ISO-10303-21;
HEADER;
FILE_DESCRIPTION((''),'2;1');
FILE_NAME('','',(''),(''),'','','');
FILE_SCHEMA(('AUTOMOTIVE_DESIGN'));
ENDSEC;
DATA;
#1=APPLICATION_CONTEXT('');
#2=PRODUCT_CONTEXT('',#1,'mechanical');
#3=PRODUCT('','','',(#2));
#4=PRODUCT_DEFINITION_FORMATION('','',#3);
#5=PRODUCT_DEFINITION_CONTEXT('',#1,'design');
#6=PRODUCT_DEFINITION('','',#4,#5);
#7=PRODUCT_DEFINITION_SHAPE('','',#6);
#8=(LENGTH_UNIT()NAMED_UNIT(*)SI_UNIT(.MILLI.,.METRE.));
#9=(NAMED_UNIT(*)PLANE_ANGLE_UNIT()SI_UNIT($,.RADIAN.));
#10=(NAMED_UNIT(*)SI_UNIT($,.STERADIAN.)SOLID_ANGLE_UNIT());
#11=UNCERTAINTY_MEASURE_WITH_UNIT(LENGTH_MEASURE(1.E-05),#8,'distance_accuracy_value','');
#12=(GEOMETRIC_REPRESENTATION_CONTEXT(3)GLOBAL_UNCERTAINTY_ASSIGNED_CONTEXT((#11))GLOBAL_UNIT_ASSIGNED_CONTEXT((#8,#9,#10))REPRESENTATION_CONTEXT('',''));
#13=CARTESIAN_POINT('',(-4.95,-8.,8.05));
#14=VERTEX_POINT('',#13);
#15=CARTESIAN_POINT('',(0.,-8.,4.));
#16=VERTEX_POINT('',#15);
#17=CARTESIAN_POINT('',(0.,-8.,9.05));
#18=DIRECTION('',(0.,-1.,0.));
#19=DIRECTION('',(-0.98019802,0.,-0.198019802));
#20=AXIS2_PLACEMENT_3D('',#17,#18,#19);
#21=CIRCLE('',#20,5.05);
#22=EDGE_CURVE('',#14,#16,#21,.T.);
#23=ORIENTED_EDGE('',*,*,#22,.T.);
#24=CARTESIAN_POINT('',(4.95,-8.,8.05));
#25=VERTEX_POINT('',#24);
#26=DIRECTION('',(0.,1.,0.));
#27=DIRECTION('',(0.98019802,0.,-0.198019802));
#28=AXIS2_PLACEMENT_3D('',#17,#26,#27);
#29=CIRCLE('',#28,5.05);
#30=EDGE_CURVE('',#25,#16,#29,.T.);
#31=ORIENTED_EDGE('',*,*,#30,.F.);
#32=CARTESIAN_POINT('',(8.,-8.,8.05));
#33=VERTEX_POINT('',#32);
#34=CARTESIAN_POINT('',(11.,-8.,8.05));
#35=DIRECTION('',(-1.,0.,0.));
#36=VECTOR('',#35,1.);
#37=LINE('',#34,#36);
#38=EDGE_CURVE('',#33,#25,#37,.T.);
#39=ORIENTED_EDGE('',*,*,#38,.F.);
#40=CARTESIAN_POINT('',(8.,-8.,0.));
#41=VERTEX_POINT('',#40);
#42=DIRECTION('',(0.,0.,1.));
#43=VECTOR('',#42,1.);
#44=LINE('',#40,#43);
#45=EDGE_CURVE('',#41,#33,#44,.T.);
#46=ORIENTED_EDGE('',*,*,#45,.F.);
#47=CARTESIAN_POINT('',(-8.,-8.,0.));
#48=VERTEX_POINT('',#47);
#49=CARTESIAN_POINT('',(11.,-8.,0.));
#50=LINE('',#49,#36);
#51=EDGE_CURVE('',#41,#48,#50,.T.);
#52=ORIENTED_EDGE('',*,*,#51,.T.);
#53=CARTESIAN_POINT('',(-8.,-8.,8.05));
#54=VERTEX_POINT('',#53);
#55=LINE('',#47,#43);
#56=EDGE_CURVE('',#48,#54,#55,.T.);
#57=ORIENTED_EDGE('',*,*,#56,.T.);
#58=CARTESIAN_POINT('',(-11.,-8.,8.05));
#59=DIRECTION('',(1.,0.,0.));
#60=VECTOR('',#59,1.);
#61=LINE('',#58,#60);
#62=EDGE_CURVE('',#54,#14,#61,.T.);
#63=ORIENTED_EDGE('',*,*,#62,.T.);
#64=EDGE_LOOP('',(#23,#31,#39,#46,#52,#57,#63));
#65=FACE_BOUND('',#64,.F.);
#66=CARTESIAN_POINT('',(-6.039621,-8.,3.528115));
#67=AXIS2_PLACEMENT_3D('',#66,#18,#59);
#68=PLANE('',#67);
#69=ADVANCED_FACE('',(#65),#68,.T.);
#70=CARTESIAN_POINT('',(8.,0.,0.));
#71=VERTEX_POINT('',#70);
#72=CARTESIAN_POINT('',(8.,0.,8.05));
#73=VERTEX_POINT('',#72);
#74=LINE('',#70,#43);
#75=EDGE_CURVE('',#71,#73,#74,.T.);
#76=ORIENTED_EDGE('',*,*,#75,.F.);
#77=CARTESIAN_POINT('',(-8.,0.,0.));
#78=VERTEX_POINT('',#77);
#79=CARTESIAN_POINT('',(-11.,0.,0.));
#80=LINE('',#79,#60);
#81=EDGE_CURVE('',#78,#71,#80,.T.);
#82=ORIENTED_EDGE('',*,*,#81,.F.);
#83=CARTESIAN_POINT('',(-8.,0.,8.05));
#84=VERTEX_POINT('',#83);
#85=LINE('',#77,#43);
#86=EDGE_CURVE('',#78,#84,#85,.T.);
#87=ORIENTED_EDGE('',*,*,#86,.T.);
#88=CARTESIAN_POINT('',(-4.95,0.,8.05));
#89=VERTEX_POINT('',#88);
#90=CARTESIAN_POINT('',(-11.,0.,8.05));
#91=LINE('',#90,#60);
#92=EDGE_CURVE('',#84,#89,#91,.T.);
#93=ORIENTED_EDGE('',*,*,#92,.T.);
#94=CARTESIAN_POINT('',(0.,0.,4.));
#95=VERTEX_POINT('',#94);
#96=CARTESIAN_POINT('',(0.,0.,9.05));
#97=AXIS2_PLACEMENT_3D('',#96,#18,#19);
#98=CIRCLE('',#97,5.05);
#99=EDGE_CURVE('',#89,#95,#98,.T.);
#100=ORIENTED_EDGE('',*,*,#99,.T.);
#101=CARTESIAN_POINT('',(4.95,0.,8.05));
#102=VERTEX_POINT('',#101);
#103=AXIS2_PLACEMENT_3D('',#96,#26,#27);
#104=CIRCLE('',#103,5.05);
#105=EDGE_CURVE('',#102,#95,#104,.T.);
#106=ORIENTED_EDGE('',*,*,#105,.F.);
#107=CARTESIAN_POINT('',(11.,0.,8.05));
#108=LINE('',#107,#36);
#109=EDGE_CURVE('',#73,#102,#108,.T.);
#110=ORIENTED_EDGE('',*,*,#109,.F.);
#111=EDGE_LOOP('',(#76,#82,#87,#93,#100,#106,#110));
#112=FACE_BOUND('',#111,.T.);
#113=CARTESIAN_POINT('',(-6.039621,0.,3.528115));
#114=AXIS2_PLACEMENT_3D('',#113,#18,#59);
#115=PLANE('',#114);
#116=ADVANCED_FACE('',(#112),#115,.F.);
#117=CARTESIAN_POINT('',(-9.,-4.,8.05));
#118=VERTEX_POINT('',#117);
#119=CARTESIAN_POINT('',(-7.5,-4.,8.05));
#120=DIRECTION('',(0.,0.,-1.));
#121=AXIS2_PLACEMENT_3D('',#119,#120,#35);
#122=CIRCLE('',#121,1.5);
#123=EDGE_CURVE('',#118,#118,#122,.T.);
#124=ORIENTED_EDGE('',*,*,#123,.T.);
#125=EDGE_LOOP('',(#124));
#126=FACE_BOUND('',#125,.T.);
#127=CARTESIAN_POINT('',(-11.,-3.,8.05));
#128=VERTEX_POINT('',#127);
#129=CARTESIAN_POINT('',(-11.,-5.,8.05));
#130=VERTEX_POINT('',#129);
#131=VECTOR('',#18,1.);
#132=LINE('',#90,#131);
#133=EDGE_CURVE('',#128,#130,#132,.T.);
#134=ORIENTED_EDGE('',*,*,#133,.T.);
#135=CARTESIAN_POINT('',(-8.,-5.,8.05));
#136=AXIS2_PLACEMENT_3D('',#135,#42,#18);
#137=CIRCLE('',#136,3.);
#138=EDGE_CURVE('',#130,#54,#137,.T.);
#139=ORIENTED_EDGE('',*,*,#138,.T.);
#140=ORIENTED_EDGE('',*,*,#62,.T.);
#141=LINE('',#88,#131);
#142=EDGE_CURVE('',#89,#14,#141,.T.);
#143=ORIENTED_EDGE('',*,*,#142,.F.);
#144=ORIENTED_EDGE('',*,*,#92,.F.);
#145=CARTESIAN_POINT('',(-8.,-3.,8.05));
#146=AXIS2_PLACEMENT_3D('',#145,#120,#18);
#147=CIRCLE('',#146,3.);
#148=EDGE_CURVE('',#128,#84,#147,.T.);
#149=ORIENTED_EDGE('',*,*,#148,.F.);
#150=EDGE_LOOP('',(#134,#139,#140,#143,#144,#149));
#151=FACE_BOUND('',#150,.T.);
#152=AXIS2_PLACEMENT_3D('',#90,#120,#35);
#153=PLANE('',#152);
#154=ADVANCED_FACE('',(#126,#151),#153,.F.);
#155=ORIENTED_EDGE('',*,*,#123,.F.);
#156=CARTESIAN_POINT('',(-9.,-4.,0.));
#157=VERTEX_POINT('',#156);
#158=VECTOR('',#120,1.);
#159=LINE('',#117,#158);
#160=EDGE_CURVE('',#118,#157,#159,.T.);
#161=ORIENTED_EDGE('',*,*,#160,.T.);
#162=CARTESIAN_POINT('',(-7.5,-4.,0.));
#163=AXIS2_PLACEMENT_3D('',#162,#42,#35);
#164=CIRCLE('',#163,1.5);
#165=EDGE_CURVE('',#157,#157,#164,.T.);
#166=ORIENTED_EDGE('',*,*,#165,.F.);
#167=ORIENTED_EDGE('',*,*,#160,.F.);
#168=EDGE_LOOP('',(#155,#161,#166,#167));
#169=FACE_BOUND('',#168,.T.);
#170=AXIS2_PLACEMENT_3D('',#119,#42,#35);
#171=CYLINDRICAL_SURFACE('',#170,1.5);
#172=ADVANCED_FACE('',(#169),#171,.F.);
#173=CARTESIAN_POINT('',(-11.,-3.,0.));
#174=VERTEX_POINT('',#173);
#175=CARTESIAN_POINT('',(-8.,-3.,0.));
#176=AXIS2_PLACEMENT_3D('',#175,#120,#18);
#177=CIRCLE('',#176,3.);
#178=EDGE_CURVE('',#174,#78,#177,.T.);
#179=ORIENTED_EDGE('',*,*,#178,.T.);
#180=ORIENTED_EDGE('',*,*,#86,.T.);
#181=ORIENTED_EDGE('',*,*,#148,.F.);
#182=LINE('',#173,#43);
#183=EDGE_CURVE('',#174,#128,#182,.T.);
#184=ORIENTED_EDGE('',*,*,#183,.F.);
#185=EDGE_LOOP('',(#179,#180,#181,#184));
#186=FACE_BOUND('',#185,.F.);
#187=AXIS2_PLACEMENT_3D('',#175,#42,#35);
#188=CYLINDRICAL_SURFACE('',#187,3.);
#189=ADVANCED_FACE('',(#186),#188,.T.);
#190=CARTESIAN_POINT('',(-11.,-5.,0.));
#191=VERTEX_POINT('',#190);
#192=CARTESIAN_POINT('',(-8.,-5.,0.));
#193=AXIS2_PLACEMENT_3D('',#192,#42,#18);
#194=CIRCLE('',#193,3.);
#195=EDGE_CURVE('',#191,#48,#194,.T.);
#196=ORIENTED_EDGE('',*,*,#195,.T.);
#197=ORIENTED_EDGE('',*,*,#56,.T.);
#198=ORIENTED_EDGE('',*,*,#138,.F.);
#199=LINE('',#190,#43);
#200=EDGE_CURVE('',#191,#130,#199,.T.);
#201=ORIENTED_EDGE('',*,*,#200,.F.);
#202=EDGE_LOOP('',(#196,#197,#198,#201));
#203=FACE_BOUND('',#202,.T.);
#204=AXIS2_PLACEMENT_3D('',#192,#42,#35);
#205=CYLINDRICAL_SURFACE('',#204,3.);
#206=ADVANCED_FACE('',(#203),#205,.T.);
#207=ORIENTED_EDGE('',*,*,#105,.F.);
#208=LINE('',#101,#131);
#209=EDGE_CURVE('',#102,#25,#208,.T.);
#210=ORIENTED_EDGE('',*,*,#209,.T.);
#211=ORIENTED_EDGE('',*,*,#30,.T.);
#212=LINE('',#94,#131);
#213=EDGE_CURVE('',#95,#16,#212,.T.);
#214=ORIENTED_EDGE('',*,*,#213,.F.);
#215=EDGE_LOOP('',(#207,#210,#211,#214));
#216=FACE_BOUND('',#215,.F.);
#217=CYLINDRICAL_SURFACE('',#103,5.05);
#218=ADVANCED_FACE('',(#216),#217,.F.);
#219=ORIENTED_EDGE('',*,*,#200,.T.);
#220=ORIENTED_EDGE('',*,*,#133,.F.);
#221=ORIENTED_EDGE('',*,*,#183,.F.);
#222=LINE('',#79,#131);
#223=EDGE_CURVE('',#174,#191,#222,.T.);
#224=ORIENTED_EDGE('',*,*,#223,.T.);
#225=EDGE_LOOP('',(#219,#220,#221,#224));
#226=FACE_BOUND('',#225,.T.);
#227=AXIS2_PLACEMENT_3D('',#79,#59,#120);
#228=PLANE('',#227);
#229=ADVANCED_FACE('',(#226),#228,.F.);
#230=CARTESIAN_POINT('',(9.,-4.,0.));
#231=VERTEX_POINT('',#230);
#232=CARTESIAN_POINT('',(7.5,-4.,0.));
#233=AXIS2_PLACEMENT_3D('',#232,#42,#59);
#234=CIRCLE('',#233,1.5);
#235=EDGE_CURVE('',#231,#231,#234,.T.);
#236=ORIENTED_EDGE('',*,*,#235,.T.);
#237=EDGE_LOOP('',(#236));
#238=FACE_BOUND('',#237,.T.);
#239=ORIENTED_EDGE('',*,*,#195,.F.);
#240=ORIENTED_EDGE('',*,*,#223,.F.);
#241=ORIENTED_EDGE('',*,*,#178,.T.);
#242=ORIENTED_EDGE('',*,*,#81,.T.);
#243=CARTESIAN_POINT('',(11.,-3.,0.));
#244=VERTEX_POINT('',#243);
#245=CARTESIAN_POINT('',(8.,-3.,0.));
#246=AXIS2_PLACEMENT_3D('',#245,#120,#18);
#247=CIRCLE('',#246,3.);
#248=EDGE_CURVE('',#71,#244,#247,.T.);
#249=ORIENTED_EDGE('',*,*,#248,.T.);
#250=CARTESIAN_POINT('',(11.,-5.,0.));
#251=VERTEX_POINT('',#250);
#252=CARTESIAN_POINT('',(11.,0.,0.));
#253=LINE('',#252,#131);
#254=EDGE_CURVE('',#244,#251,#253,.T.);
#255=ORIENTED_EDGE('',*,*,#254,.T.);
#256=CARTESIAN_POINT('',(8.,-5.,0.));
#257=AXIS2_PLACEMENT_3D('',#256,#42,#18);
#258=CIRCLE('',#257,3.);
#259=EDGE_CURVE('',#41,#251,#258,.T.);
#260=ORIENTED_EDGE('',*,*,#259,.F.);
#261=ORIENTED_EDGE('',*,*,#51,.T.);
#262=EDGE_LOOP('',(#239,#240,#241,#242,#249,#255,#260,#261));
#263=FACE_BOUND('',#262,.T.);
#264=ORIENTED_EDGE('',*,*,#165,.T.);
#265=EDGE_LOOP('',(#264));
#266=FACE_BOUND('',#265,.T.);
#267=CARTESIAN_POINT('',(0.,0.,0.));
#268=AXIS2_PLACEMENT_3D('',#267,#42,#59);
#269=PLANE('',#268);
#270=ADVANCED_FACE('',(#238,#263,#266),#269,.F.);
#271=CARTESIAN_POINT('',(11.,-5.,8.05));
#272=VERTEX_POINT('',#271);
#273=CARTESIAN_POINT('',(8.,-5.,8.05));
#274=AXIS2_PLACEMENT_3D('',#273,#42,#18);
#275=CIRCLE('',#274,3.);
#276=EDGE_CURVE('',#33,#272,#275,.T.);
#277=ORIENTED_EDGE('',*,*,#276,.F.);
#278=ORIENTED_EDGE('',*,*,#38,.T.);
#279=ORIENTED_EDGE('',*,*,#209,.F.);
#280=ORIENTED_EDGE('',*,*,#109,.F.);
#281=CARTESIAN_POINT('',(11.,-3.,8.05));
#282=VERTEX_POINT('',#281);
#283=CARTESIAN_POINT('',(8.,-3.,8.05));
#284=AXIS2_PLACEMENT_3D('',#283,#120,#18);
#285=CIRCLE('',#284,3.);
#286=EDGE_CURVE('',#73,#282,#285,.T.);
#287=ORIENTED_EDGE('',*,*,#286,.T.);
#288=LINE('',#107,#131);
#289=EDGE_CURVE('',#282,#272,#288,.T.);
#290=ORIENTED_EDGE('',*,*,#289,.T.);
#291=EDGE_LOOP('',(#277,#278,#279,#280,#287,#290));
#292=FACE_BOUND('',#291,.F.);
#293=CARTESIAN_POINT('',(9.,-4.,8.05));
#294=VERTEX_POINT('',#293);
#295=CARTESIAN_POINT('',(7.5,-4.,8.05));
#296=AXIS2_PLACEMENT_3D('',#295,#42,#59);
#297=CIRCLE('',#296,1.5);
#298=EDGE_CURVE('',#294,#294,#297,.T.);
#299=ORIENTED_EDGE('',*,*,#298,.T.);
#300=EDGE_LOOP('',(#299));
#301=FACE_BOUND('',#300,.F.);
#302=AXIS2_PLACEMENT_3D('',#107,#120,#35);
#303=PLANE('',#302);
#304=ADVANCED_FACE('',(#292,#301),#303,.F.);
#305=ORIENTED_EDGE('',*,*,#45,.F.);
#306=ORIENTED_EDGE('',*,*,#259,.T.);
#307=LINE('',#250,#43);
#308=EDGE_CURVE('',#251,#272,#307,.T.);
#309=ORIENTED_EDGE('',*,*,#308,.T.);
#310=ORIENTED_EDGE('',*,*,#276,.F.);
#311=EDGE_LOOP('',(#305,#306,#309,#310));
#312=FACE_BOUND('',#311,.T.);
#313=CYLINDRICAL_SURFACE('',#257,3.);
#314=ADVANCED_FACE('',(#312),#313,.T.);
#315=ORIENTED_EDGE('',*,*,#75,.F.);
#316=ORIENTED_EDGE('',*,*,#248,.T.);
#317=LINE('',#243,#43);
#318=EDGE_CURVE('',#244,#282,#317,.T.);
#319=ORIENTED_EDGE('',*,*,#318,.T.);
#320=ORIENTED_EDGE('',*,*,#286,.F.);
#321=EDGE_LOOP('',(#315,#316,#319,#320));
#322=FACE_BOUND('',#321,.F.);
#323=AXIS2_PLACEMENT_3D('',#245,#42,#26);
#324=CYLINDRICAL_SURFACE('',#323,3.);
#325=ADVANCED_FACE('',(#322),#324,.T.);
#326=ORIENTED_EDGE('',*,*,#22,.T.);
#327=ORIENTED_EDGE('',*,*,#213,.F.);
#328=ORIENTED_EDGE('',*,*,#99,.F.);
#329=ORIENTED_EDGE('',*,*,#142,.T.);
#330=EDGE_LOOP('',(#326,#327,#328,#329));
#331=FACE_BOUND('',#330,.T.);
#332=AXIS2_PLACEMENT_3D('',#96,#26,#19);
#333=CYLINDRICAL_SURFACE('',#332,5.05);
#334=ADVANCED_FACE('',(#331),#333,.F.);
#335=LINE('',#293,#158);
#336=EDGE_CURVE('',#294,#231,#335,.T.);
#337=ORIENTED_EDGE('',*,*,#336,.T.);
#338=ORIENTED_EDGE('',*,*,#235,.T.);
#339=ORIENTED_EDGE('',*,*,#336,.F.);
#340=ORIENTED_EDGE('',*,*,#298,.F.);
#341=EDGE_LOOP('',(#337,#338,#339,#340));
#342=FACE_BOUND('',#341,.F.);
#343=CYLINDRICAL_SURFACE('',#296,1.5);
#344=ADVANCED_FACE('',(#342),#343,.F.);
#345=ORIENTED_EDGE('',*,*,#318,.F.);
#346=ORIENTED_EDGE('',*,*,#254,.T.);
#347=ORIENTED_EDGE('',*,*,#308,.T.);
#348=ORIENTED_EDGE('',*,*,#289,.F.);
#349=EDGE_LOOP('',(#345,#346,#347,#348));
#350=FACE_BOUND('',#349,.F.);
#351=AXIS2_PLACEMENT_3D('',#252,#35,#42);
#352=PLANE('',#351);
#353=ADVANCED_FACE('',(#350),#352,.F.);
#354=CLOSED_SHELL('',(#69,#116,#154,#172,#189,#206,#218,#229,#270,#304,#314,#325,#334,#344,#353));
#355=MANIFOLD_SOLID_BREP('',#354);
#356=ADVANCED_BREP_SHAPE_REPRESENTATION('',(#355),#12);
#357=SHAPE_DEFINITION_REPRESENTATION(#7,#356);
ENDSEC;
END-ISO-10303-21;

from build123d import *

# Parameters (mm, degrees)
F1_DEPTH = 8
F2_R     = 1.5
F3_DEPTH = 25
F4_R     = 3


# Not quite as in the source:
# - a pattern or mirror of a feature is missing from the dataset's text; its kind, count and spacing are read off the source's solid


with BuildPart() as f1:
    # F0 (on Front) → F1 (new body)
    with BuildSketch(Plane.XZ):
        with BuildLine():
            Line((11, 0), (11, 8.05))
            Line((11, 8.05), (4.95, 8.05))
            ThreePointArc((4.95, 8.05), (3.1978508408, 5.141515639), (0, 4))
            Line((0, 4), (0, 0))
            Line((0, 0), (11, 0))
        make_face()
    extrude(amount=F1_DEPTH)

    # F1_copies: F1 across plane


with BuildPart() as f1_1:
    add(f1.part)
    add(f1.part.mirror(Plane(origin=(0, 0, 0), x_dir=(0, 0, -1), z_dir=(-1, 0, 0))))

    # F2 (on face) → F3 (cut)
    with BuildSketch(Plane.XY.offset(8.05)):
        with Locations((7.5, -4)):
            Circle(F2_R)
    f3 = extrude(amount=-F3_DEPTH, mode=Mode.SUBTRACT)

    # F3_copies: F3 across plane
    add(f3.mirror(Plane(origin=(0, 0, 0), x_dir=(0, 0, -1), z_dir=(-1, 0, 0))), mode=Mode.SUBTRACT)

    # F4
    f4_edges = [f1_1.edges().sort_by_distance(p)[0] for p in [
        (11, 0, 4.025),
        (11, -8, 4.025),
        (-11, 0, 4.025),
        (-11, -8, 4.025),
    ]]
    fillet(f4_edges, radius=F4_R)


solid = f1_1.part
